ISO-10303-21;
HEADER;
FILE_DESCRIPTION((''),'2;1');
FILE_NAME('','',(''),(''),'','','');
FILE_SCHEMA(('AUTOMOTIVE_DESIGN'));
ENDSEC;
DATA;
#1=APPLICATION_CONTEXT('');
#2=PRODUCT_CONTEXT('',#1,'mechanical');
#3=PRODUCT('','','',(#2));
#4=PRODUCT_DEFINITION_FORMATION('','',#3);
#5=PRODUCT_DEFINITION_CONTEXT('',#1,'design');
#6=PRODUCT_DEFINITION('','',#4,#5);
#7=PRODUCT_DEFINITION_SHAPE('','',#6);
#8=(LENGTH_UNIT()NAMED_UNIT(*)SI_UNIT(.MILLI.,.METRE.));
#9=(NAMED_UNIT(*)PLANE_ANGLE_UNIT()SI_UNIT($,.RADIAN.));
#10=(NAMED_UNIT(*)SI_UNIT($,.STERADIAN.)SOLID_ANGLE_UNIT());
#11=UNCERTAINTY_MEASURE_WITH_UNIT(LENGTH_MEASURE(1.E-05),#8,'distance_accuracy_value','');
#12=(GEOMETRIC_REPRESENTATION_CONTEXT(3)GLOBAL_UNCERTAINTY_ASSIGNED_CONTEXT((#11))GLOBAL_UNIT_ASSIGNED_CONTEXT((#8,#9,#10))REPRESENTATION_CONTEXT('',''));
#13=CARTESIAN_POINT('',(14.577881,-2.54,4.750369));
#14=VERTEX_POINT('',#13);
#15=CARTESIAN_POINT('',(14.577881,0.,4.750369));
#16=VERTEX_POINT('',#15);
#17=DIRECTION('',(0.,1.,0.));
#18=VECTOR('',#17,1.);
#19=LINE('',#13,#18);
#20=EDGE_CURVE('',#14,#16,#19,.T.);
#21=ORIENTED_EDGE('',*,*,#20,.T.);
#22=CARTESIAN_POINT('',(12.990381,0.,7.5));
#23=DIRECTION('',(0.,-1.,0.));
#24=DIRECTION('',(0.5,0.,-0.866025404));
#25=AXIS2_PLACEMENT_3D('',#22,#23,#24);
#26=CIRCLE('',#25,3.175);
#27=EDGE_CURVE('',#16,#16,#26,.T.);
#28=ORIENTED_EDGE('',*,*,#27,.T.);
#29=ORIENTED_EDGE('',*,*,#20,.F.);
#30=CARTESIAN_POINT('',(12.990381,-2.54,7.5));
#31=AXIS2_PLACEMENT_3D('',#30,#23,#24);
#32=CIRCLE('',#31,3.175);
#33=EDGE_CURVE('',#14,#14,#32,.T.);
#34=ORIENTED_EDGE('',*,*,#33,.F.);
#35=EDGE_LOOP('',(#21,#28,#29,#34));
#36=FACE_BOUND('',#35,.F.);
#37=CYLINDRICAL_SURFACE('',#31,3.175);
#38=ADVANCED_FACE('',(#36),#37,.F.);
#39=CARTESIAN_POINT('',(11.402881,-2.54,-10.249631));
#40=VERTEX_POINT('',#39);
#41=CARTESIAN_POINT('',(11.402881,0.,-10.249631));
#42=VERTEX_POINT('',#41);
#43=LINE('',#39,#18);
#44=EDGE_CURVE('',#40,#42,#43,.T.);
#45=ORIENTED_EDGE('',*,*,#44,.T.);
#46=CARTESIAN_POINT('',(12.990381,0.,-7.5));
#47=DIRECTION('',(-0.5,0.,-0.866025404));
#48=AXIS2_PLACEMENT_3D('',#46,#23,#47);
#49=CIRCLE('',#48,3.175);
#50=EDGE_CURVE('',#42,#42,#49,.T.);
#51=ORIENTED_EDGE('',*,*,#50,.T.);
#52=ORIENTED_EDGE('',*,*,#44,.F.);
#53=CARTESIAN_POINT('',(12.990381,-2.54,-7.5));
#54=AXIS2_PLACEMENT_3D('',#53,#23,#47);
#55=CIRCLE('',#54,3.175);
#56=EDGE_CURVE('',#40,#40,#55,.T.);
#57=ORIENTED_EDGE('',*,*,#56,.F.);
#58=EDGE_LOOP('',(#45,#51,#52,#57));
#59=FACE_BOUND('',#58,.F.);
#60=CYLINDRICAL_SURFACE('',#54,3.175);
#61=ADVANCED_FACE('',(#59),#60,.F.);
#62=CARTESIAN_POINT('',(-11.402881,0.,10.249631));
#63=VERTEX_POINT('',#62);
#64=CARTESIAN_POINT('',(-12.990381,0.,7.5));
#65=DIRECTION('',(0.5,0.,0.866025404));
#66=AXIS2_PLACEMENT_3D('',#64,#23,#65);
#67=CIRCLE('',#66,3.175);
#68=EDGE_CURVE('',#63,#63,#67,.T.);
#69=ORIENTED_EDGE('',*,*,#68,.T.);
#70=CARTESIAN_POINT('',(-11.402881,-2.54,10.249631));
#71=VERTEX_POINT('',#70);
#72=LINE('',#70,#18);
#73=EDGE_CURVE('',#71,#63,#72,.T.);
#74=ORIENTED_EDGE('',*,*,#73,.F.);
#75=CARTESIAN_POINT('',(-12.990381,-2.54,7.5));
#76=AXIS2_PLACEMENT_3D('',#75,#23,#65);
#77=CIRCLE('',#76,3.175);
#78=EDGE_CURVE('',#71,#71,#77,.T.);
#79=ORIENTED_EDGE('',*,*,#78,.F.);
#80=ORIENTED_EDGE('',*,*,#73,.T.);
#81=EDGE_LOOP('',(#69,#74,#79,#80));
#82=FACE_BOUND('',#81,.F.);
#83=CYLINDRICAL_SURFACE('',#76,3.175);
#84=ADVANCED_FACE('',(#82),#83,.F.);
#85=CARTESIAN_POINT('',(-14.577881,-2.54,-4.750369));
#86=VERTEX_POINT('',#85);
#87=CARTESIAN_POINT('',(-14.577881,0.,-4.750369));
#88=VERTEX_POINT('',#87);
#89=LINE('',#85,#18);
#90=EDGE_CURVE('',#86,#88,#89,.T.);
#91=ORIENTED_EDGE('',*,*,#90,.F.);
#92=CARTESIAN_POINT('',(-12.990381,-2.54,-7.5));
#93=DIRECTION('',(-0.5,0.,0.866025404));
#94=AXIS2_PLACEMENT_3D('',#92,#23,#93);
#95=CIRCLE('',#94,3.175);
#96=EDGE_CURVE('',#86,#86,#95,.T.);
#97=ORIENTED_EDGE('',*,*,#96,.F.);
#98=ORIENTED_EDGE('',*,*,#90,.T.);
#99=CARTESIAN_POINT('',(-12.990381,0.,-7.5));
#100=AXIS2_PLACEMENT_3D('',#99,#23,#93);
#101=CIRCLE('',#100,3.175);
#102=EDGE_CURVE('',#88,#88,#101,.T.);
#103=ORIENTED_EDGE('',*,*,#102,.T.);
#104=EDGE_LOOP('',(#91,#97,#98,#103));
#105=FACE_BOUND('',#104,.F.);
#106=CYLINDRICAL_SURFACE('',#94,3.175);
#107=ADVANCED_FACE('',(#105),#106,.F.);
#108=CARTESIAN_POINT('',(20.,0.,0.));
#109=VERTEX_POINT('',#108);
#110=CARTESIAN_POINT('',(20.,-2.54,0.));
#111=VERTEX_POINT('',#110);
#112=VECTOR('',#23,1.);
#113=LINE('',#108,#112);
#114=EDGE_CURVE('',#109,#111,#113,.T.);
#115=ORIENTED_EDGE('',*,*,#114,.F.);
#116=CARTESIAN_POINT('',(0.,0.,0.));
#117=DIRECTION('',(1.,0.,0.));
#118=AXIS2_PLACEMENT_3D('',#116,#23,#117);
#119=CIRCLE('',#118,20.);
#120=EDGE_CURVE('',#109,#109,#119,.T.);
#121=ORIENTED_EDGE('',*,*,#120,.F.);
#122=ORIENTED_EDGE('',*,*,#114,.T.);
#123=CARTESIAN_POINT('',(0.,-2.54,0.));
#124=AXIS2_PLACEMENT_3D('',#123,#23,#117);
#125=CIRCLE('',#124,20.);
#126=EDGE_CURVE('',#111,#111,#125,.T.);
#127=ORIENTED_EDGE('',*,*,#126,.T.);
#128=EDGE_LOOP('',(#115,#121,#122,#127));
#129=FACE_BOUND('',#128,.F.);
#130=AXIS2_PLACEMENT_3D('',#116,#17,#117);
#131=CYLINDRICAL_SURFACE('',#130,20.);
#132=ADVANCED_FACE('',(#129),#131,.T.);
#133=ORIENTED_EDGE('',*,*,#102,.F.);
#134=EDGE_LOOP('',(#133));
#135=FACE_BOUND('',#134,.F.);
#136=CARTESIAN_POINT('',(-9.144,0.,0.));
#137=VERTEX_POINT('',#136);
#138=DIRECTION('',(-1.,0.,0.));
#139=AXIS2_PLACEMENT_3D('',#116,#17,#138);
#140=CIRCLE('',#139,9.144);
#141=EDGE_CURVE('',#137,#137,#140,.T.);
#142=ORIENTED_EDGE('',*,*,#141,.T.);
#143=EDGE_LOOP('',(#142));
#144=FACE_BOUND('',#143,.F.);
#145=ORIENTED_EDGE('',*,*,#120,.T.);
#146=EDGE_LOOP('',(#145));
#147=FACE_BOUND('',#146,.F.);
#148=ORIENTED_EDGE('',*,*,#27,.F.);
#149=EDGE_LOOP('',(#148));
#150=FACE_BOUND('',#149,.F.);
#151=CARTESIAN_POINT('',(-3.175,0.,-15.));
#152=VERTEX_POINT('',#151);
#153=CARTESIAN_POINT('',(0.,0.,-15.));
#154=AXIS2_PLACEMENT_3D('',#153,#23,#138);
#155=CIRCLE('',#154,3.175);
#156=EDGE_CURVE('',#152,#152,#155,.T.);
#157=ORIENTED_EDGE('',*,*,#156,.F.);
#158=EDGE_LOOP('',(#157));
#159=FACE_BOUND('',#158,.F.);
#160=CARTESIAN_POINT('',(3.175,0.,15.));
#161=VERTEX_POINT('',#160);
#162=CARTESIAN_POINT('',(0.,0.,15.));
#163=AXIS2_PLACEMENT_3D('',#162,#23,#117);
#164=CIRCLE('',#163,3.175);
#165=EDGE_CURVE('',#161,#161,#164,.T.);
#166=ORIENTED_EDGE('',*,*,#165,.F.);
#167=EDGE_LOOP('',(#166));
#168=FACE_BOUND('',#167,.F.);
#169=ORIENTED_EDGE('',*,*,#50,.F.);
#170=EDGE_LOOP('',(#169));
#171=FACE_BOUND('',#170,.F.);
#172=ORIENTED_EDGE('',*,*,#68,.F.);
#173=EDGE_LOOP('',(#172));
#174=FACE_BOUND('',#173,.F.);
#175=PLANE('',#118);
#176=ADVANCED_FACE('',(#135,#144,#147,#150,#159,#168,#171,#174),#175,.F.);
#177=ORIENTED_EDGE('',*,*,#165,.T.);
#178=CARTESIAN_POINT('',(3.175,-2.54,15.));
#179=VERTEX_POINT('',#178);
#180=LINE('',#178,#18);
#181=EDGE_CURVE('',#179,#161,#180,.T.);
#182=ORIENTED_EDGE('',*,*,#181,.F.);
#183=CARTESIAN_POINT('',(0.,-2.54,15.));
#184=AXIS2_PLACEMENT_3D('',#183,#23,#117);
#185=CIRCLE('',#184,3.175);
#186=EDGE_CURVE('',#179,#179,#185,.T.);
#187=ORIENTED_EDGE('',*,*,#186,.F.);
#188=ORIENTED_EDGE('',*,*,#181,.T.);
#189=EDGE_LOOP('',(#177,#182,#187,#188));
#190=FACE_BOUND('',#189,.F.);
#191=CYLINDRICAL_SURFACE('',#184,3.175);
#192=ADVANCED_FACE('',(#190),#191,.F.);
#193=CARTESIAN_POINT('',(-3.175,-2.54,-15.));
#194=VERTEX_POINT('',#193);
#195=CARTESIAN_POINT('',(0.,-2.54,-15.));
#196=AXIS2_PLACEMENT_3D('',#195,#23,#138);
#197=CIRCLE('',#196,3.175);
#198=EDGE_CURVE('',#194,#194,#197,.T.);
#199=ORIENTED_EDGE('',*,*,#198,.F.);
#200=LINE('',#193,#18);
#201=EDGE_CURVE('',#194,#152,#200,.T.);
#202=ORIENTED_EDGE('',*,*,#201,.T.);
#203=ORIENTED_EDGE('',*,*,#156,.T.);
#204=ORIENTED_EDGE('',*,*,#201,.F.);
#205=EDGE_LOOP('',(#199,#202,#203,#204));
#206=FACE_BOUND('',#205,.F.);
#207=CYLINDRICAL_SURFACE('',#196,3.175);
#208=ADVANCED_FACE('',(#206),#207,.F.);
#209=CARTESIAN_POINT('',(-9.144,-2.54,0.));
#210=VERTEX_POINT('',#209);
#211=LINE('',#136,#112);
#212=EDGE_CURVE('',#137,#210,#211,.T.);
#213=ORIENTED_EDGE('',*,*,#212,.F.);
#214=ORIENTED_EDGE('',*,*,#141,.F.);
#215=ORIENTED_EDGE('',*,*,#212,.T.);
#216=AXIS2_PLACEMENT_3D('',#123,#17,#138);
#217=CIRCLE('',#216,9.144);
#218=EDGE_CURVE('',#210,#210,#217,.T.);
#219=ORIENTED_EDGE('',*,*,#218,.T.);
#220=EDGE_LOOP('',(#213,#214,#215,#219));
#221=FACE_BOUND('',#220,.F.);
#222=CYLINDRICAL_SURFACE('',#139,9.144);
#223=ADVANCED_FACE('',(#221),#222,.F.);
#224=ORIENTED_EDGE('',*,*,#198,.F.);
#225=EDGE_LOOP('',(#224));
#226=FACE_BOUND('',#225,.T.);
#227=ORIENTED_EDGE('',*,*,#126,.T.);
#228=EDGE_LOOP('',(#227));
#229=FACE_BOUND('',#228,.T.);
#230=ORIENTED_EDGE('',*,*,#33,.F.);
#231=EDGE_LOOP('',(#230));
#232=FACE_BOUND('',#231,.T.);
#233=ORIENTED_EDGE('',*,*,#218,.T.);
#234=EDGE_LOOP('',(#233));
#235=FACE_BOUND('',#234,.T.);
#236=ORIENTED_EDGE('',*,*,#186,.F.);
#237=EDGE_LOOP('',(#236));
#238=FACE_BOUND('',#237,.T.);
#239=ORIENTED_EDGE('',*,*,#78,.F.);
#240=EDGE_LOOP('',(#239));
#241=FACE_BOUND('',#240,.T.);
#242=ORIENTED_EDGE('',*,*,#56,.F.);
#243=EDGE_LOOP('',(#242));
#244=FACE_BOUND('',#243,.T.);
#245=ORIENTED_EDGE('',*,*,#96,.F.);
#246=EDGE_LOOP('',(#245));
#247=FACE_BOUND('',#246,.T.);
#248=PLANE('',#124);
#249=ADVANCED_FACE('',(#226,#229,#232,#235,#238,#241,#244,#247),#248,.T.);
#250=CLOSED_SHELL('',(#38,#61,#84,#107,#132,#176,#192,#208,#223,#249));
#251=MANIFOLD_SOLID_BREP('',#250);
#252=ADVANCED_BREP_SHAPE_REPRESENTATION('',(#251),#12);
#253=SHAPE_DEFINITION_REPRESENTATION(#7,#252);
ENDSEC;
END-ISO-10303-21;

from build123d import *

# Parameters (mm, degrees)
F0_R            = 20
F1_DEPTH        = 2.54
F2_R            = 9.144
F3_DEPTH        = 8.5
F4_R            = 3.175
F5_DEPTH        = 2.541
F5_COPIES_COUNT = 6


# Not quite as in the source:
# - a pattern or mirror of a feature is missing from the dataset's text; its kind, count and spacing are read off the source's solid


with BuildPart() as f1:
    # F0 (on Front) → F1 (new body)
    with BuildSketch(Plane.XZ):
        Circle(F0_R)
    extrude(amount=F1_DEPTH)

    # F2 (on face) → F3 (cut)
    with BuildSketch(Plane(origin=(0, 0, 0), x_dir=(-1, 0, 0), z_dir=(0, 1, 0))):
        Circle(F2_R)
    extrude(amount=-F3_DEPTH, mode=Mode.SUBTRACT)

    # F4 (on face) → F5 (cut, through all)
    with BuildSketch(Plane.XZ.offset(2.54)):
        with Locations((0, 15)):
            Circle(F4_R)
    f5 = extrude(amount=-F5_DEPTH, mode=Mode.SUBTRACT)

    # F5_copies: F5 ×6 about axis
    f5_copies_axis = Axis((0, 0, 0), (0, 1, 0))
    for i in range(1, F5_COPIES_COUNT):
        add(f5.rotate(f5_copies_axis, i * 360 / F5_COPIES_COUNT), mode=Mode.SUBTRACT)


solid = f1.part
